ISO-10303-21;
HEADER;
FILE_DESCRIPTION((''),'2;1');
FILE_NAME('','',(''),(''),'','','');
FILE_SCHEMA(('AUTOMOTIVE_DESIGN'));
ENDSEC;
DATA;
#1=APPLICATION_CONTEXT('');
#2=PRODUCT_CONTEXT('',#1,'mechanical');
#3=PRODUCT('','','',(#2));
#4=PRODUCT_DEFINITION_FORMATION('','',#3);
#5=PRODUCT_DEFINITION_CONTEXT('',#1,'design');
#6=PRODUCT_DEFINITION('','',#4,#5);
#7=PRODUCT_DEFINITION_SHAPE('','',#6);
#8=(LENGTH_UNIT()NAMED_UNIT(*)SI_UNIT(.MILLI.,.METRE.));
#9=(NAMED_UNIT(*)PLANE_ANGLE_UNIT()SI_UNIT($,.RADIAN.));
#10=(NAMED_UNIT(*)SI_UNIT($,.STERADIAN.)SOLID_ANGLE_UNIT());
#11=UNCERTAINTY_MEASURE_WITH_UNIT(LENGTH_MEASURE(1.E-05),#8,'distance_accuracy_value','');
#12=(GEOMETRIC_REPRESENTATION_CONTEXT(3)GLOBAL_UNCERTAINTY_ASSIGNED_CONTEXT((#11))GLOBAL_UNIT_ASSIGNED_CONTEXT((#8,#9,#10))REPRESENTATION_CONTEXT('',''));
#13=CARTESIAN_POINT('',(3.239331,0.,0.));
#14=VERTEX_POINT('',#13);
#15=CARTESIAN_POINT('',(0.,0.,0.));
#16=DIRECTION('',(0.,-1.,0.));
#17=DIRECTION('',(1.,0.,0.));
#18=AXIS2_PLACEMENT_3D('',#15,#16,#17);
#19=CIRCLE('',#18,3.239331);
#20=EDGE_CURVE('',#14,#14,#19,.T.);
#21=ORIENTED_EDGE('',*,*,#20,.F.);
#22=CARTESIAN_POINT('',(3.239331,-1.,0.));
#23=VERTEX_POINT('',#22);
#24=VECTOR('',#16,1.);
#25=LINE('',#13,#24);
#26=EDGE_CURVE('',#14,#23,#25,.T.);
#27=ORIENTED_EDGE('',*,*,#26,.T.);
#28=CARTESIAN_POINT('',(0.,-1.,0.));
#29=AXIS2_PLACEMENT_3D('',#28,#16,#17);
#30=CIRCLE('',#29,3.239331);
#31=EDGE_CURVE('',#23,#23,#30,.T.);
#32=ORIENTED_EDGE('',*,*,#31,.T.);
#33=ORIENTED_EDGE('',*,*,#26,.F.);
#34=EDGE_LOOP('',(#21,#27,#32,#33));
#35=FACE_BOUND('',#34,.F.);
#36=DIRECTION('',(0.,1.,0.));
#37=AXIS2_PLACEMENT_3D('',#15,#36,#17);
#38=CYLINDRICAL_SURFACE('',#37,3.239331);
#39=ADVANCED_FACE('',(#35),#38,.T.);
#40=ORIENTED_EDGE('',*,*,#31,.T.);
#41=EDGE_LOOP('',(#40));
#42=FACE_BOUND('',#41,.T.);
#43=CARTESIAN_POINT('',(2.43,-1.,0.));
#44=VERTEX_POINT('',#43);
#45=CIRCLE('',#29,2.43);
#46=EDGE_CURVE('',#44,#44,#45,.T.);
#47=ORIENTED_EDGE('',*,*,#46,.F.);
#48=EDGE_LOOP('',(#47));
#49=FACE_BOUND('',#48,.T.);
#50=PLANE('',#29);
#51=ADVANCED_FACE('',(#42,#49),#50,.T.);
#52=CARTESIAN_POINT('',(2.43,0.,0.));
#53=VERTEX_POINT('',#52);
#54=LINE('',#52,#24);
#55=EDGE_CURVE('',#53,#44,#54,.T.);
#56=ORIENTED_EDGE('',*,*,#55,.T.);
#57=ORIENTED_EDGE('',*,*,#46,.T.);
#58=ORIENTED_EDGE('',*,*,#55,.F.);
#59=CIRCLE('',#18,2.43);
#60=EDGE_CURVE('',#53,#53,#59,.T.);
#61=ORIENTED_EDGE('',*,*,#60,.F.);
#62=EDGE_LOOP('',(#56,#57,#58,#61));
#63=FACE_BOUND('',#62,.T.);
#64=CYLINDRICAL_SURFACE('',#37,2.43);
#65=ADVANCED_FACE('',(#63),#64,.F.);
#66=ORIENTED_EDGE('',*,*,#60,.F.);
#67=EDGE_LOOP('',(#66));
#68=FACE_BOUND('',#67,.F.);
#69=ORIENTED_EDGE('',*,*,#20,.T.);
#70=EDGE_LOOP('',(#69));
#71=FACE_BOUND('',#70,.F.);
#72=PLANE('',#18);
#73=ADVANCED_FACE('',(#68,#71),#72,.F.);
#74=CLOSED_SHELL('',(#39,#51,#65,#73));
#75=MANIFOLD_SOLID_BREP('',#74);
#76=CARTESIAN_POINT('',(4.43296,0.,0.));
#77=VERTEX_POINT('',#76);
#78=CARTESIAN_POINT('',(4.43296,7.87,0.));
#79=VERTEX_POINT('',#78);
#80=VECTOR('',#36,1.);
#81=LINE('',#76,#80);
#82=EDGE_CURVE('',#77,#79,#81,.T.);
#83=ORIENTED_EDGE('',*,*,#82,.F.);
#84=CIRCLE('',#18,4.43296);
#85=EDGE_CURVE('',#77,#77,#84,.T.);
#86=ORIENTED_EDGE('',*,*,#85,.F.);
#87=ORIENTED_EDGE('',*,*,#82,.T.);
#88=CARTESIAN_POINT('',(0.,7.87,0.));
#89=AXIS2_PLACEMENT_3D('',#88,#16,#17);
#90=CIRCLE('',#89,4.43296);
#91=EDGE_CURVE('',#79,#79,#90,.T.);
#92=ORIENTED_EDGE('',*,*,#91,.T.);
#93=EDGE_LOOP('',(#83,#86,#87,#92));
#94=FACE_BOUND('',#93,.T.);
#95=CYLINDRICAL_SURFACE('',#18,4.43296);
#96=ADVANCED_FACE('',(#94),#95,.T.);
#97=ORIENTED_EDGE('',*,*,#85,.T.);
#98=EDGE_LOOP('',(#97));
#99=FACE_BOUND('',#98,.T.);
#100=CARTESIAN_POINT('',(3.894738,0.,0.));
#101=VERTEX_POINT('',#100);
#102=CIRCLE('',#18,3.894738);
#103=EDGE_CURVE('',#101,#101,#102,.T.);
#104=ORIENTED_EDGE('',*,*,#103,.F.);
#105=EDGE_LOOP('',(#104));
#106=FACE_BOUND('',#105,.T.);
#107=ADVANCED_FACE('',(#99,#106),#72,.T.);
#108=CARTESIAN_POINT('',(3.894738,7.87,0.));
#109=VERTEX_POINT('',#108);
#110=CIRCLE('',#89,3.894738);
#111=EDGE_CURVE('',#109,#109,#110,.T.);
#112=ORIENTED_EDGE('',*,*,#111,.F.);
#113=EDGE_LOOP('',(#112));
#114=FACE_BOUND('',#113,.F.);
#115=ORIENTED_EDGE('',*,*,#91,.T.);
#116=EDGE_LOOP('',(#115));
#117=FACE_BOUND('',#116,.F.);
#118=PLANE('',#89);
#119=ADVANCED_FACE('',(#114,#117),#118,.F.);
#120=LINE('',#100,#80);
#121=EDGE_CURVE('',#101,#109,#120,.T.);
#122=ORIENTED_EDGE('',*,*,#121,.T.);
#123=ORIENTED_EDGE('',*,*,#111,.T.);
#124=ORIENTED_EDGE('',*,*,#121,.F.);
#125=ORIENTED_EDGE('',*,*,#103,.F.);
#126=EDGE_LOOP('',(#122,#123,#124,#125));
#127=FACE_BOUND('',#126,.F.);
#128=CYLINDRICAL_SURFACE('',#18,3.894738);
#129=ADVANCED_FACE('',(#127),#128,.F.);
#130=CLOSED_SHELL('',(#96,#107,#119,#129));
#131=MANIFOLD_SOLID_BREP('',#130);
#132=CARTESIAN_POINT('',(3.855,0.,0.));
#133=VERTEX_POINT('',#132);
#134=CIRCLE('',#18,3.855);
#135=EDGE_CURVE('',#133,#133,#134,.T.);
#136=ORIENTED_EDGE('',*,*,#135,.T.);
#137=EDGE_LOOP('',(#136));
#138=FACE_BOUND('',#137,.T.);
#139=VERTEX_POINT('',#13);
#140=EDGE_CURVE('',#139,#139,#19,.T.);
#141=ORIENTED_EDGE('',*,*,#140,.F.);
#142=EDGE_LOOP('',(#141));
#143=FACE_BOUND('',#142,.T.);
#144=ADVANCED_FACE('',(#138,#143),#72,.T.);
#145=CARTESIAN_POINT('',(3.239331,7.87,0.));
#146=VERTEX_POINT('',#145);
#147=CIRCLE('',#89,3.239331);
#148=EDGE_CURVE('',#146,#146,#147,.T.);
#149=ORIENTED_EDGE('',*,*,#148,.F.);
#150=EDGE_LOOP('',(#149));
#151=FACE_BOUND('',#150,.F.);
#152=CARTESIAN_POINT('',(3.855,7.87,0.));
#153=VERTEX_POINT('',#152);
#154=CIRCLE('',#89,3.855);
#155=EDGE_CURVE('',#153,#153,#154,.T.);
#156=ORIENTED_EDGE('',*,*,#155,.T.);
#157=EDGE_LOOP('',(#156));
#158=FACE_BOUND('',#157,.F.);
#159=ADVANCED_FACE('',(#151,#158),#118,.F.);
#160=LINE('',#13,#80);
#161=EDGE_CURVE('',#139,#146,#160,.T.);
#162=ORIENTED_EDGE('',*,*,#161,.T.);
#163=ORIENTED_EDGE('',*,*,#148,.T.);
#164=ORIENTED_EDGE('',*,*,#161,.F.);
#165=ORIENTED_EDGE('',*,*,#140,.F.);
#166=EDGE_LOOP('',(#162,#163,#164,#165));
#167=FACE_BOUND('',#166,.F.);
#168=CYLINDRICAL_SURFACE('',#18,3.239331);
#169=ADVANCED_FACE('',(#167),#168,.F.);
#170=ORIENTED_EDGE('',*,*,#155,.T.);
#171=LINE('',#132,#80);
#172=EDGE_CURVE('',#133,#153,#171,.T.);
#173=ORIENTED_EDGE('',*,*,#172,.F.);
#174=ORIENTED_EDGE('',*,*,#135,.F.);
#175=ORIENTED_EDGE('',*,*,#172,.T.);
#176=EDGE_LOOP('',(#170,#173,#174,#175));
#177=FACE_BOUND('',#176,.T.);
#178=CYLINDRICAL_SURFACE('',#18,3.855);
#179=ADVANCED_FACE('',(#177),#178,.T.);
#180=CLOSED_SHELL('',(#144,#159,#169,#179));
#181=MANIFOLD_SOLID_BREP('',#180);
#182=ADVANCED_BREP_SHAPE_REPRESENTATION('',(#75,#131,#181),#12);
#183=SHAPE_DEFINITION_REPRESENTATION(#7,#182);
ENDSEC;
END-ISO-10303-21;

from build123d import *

# Parameters (mm, degrees)
F0_R     = 4.4329603323
F0_R_2   = 3.894738079
F1_DEPTH = 7.87
F0_R_3   = 3.855
F0_R_4   = 3.239330786
F0_R_5   = 2.43
F2_DEPTH = 1


# Not quite as in the source:
# - the program builds the solid bodies; features that only make, move or delete a surface that nothing else refers to are left out


with BuildPart() as f1:
    # F0 (on Front) → F1 (new body)
    with BuildSketch(Plane.XZ):
        Circle(F0_R)
        Circle(F0_R_2, mode=Mode.SUBTRACT)
    extrude(amount=-F1_DEPTH)


with BuildPart() as f1b:
    # F0 (on Front) → F1, piece 2 (new body)
    with BuildSketch(Plane.XZ):
        Circle(F0_R_3)
        Circle(F0_R_4, mode=Mode.SUBTRACT)
    extrude(amount=-F1_DEPTH)


with BuildPart() as f2:
    # F0 (on Front) → F2 (new body)
    with BuildSketch(Plane.XZ):
        Circle(F0_R_4)
        Circle(F0_R_5, mode=Mode.SUBTRACT)
    extrude(amount=F2_DEPTH)


solid = Compound([f1.part, f1b.part, f2.part])
